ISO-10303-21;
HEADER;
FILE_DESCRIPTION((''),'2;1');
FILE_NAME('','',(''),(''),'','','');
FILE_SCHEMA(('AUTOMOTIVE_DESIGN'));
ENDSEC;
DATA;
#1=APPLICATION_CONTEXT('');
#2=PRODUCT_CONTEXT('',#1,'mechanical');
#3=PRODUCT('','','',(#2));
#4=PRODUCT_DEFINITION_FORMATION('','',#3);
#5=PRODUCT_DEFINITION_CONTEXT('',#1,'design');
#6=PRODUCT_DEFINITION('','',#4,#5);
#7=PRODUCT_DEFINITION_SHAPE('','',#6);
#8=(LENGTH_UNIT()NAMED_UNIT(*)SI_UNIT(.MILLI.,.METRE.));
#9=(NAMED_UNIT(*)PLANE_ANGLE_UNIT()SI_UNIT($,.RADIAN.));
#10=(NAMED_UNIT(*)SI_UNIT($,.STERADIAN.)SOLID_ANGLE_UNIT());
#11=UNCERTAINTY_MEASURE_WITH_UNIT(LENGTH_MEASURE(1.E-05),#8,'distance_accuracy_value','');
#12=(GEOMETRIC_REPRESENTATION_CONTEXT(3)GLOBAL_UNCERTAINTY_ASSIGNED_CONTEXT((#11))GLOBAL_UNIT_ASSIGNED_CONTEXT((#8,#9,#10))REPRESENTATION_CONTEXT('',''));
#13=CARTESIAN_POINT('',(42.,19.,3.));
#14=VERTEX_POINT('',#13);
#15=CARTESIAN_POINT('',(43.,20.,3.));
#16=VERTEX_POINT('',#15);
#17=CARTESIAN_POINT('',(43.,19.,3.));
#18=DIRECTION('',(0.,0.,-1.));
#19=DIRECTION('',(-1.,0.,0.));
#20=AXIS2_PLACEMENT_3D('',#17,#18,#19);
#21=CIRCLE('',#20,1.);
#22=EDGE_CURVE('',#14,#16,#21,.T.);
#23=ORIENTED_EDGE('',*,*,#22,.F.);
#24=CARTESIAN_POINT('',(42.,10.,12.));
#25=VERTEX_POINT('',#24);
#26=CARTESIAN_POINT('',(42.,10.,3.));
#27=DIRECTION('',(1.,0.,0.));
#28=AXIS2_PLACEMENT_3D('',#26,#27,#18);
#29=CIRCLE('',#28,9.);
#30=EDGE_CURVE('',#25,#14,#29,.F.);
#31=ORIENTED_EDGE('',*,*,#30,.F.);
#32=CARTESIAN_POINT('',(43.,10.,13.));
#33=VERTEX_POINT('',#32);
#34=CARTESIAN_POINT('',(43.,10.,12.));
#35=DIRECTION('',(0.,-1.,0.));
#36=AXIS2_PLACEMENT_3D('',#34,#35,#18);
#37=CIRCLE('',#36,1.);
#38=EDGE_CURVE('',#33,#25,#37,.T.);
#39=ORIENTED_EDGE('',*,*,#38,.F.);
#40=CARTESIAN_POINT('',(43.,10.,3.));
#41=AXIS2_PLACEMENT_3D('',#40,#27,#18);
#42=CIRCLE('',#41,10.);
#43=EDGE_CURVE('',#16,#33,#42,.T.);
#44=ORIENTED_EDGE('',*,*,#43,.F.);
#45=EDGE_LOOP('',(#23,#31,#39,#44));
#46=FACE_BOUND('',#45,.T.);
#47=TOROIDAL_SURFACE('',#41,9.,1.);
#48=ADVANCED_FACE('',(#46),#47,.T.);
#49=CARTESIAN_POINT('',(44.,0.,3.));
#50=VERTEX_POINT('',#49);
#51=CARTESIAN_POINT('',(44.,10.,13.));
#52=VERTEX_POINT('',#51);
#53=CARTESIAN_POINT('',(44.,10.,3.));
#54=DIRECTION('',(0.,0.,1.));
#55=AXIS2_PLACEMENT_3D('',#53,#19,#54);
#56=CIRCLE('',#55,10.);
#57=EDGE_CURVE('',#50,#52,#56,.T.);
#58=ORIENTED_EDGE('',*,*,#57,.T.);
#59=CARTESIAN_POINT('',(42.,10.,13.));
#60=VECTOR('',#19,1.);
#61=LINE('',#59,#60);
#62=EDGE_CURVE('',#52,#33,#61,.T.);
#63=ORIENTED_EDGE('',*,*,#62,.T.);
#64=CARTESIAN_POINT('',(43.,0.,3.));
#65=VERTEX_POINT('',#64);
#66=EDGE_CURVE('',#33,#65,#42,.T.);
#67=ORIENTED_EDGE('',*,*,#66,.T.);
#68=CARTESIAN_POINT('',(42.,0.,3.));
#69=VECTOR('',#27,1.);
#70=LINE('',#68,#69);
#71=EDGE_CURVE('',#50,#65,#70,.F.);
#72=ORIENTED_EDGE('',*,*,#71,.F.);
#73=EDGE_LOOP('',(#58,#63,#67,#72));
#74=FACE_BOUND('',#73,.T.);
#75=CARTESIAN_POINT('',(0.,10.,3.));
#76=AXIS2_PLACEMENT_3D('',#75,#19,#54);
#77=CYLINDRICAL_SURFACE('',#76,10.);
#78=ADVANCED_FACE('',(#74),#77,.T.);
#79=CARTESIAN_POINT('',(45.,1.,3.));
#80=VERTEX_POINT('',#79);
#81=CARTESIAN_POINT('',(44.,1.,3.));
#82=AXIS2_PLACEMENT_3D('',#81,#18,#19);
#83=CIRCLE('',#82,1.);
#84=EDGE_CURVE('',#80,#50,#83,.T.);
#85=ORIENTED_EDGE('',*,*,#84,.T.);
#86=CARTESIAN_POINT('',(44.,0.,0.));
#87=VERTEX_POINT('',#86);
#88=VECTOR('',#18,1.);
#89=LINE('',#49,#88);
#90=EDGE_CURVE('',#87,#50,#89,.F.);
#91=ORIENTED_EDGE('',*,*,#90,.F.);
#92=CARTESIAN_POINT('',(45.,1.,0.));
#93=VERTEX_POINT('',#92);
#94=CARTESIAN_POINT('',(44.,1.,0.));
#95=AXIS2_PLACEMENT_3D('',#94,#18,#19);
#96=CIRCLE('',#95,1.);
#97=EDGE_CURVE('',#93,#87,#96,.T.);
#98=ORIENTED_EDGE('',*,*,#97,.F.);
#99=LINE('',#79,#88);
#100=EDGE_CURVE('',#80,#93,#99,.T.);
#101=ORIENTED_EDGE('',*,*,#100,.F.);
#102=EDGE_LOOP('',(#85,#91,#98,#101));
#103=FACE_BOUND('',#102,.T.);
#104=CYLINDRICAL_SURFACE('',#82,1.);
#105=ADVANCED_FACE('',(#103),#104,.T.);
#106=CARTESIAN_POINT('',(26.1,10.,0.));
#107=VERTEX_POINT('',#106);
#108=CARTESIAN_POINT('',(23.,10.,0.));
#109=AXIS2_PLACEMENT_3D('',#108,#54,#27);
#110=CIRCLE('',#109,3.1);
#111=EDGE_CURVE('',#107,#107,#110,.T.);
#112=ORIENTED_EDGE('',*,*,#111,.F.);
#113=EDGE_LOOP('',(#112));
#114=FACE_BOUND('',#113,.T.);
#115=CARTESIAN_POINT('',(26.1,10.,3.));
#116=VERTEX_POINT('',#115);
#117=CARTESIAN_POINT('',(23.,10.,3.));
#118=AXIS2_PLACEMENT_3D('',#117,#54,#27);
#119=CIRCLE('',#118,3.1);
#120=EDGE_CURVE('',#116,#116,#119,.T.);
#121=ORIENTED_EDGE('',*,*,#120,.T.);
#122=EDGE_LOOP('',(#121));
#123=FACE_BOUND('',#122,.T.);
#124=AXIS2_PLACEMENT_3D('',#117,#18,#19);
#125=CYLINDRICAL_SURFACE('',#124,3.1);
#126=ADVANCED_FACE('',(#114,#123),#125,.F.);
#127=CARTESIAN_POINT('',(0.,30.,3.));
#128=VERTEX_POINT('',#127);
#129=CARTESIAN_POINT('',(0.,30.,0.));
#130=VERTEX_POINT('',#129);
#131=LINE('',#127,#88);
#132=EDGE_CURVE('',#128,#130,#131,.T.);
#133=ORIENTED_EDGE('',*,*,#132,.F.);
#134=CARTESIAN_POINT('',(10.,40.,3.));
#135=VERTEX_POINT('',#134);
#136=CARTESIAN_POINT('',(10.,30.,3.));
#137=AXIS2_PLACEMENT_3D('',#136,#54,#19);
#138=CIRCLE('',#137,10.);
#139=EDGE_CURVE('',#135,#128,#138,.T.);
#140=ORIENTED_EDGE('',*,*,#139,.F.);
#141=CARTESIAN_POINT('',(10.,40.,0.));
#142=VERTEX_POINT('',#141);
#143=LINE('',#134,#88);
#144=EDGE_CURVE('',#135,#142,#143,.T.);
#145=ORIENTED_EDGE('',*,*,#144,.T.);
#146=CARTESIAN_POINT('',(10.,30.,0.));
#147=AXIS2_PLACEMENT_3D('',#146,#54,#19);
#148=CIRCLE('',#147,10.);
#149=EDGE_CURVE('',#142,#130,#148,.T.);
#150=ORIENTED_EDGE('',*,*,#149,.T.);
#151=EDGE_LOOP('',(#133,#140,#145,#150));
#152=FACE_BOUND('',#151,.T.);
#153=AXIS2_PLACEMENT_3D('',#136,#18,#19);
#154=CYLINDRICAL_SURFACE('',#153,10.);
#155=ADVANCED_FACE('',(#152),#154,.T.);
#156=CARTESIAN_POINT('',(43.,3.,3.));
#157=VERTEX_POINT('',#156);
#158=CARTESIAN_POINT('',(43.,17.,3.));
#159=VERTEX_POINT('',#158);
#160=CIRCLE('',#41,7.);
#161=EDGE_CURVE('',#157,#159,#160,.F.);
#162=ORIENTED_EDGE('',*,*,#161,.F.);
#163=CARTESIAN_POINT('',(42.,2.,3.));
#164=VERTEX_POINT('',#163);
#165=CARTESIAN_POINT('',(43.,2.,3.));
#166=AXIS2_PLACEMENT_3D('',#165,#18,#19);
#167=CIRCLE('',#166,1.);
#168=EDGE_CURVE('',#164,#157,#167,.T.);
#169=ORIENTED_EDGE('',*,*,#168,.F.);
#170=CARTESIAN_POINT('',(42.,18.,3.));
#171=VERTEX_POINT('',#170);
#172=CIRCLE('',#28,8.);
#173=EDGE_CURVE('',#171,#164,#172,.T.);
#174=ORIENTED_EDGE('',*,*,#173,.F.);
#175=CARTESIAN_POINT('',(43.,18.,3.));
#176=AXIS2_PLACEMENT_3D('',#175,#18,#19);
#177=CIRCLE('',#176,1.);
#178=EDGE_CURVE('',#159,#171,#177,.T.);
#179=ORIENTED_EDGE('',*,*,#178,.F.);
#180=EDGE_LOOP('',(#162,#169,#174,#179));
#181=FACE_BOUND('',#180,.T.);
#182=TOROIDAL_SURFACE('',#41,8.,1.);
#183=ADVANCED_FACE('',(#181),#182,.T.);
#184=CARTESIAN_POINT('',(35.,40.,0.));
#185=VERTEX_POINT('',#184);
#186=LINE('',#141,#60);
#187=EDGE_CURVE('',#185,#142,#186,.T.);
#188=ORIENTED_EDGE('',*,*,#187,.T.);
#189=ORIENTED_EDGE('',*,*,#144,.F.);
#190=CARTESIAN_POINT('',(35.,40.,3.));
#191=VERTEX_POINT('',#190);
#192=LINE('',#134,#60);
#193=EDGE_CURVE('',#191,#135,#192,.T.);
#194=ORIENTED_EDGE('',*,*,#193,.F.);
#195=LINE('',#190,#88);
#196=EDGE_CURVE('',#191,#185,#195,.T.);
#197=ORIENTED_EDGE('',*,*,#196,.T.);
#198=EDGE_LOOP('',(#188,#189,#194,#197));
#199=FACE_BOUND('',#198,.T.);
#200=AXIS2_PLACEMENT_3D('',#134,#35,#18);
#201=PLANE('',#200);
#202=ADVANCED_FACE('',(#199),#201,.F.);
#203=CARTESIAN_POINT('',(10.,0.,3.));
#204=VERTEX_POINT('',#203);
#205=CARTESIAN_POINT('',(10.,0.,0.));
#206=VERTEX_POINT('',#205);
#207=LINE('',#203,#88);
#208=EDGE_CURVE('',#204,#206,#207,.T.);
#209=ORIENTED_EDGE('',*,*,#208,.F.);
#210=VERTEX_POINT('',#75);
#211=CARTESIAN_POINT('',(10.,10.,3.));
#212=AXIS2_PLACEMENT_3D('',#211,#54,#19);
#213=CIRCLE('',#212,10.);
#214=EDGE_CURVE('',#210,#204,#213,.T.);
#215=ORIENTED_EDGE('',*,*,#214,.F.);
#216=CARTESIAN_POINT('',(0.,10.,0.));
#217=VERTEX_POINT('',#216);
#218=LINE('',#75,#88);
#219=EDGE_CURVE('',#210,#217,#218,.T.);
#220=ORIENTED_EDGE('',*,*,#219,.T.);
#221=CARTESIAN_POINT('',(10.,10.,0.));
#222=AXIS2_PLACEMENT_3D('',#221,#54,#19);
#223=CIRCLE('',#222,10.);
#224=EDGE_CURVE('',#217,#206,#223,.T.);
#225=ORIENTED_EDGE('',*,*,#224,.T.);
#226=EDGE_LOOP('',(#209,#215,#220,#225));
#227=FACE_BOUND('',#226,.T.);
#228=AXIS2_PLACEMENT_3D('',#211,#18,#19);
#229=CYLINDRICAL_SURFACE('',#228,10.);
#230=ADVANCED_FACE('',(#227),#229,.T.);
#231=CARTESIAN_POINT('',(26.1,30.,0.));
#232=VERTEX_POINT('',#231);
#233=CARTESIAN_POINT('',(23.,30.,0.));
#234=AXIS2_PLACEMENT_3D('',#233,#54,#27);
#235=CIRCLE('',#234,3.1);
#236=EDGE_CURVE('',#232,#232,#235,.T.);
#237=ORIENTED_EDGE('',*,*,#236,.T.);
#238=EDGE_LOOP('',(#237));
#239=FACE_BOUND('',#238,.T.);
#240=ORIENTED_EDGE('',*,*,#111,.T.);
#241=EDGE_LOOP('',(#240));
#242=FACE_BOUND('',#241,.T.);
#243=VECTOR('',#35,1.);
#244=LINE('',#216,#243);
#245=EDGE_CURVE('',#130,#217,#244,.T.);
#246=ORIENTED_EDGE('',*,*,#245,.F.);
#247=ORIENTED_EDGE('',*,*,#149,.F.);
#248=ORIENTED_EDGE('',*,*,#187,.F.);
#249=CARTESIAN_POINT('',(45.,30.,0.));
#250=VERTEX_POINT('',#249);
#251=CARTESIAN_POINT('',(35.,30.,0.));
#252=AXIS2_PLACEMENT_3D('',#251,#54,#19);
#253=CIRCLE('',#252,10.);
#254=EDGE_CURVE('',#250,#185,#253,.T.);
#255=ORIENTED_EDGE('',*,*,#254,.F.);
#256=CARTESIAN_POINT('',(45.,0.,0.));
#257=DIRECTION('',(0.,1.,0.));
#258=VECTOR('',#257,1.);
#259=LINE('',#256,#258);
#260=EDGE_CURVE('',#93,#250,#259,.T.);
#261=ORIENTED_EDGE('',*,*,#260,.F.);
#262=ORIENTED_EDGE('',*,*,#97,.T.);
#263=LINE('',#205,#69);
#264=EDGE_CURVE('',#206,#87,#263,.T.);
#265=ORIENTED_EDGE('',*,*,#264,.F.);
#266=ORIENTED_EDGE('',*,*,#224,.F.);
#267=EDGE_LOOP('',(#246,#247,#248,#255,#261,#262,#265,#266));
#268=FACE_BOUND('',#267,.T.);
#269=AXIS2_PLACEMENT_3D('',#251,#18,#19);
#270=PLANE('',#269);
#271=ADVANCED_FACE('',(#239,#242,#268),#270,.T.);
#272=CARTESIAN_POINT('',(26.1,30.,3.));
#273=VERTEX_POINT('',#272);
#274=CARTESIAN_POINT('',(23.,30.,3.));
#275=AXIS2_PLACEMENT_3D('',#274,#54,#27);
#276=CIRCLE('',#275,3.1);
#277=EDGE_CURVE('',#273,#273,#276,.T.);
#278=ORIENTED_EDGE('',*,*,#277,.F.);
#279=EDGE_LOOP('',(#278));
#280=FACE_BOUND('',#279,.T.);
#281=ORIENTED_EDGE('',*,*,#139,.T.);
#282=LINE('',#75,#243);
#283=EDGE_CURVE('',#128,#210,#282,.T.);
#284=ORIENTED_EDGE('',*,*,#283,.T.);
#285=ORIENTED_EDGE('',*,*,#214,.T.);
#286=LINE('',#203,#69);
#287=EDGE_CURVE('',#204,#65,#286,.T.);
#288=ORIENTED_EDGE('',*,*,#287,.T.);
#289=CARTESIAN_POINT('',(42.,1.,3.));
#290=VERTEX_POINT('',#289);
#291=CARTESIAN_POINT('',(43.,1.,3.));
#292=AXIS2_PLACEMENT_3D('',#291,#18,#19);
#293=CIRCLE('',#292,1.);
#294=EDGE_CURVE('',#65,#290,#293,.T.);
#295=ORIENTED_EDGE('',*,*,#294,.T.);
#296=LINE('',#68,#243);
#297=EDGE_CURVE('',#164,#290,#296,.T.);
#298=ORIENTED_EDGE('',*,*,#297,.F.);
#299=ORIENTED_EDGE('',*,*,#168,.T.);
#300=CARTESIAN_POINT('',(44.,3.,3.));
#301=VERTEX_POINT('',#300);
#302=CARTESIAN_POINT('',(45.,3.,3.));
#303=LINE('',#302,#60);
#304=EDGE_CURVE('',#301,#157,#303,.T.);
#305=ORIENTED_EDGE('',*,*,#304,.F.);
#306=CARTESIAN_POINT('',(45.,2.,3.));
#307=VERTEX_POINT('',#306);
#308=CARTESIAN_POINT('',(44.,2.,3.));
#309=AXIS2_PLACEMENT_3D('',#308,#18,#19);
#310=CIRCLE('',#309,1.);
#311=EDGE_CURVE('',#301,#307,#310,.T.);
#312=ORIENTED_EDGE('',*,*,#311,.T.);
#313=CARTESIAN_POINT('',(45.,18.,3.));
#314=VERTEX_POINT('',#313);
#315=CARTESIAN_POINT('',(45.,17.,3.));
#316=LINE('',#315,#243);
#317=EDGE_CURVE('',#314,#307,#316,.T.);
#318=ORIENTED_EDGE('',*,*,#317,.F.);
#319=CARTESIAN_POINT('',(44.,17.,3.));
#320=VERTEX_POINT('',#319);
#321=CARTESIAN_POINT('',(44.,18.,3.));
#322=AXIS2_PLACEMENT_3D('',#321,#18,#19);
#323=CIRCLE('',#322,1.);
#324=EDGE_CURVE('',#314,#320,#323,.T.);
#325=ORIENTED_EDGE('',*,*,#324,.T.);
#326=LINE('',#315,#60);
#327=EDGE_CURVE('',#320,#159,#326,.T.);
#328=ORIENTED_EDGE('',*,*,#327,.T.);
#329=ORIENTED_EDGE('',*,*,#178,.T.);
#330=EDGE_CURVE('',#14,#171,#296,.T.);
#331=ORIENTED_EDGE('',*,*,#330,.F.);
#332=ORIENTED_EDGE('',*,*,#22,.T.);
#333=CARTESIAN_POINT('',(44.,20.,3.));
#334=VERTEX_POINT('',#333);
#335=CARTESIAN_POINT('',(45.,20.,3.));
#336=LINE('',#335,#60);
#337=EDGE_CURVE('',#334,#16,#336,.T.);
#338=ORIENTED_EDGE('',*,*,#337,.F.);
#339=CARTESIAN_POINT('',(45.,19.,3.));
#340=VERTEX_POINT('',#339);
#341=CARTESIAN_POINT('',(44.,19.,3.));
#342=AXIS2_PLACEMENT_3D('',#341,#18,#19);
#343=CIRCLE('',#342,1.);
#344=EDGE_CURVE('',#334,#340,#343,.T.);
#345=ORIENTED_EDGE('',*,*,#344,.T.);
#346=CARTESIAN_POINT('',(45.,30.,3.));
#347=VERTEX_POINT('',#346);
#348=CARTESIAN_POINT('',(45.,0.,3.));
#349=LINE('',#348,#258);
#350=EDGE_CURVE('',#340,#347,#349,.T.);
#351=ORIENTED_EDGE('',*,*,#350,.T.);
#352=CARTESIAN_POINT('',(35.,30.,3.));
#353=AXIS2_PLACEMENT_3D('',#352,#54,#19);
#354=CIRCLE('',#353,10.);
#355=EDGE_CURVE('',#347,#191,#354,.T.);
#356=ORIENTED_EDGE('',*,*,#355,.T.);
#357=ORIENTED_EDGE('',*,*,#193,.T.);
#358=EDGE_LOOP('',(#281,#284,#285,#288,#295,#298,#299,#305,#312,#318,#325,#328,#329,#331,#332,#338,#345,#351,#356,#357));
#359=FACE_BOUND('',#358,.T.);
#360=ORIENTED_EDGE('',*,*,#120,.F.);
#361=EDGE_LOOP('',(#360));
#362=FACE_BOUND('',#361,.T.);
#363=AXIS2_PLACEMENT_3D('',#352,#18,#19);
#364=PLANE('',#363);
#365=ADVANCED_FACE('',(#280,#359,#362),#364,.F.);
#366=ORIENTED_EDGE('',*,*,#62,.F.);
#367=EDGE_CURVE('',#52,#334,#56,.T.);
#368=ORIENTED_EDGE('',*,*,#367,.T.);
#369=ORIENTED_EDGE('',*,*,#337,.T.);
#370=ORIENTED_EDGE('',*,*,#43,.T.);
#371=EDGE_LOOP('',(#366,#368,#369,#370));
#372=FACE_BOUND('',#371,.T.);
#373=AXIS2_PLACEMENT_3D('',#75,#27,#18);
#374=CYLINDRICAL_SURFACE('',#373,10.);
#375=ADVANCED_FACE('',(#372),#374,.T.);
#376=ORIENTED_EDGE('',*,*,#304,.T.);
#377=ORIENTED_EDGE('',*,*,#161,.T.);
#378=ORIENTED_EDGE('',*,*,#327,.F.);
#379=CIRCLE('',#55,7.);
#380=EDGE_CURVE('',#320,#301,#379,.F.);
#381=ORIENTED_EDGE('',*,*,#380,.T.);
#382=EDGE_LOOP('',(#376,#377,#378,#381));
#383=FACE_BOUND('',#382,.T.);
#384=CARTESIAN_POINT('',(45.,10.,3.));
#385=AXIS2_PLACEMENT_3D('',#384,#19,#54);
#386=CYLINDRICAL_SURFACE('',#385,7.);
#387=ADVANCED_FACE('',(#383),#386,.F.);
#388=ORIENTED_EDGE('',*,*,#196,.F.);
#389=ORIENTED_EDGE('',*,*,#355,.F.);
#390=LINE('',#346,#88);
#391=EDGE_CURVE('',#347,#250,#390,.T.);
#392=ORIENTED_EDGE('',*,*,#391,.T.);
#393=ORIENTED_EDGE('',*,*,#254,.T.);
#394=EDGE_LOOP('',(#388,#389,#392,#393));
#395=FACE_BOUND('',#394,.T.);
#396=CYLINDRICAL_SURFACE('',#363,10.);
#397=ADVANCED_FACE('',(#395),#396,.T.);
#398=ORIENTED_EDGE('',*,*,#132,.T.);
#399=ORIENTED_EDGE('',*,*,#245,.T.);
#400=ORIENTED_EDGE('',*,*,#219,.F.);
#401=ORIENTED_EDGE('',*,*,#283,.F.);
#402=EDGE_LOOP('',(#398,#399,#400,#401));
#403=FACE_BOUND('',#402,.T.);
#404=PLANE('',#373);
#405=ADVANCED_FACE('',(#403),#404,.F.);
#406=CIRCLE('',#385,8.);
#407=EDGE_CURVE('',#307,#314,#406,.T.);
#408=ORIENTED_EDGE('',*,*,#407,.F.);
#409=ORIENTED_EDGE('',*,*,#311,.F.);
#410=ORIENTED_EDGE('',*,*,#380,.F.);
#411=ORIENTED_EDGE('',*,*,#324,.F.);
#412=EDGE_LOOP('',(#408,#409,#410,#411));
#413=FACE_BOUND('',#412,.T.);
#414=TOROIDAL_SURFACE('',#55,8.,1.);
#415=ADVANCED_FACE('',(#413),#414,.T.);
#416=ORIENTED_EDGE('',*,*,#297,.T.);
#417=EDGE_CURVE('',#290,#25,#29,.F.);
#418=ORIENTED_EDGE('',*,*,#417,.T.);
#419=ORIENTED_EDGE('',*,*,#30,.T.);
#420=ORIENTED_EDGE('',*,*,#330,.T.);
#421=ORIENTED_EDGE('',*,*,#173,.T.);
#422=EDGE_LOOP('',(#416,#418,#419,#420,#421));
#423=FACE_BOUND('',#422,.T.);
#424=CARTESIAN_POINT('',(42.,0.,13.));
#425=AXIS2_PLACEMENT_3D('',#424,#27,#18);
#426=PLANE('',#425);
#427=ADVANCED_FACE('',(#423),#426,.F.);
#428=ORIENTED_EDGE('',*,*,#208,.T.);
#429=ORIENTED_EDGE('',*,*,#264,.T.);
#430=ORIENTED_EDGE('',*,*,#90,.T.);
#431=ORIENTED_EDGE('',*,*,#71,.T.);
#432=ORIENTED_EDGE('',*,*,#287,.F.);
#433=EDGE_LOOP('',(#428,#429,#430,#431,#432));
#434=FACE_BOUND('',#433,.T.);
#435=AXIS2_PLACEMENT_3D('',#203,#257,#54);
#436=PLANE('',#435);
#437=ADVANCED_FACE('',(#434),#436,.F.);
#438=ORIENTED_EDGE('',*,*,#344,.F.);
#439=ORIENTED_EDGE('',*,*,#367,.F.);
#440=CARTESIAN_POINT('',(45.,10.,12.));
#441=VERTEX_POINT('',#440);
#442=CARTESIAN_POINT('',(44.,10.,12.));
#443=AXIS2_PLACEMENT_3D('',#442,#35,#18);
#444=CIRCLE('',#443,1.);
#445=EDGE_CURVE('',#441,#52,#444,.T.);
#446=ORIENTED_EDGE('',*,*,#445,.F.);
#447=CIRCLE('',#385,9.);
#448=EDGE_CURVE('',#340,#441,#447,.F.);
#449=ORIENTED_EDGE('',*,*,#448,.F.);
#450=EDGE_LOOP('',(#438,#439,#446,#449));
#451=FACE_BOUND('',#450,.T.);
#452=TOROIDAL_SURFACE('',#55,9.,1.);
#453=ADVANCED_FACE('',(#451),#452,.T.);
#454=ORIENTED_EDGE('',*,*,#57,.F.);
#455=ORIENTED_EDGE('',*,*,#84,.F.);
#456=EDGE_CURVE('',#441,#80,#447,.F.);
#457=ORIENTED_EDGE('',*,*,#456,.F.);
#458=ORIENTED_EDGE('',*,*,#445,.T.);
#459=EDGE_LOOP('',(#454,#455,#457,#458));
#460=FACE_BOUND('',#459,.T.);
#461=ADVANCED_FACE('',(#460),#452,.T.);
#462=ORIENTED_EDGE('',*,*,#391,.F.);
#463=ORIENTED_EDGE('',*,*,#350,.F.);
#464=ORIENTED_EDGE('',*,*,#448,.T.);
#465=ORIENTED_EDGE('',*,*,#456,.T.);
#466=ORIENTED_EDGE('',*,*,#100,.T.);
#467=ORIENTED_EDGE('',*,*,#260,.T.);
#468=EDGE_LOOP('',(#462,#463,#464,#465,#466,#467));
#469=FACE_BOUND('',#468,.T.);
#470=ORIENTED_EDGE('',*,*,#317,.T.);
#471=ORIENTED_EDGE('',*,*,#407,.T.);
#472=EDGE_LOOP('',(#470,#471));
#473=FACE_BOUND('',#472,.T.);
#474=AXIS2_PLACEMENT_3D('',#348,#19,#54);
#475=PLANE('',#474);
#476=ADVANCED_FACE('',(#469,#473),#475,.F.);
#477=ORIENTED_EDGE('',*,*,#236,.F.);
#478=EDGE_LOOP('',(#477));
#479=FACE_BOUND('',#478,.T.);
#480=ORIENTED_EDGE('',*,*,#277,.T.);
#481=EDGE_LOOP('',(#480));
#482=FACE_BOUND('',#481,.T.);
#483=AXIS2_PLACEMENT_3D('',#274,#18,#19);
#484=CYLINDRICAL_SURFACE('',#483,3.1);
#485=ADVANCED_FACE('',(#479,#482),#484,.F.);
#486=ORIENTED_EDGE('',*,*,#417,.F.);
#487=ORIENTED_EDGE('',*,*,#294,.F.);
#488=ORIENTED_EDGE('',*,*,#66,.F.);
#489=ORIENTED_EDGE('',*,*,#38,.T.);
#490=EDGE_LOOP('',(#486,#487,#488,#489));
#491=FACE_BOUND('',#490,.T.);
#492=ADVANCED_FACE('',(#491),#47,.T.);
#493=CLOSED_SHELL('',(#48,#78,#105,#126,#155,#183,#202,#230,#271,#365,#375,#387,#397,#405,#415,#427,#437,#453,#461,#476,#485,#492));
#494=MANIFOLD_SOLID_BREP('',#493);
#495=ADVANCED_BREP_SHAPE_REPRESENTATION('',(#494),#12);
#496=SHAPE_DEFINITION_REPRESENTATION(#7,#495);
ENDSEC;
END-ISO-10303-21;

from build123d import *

# Parameters (mm, degrees)
SKETCH1_R           = 3.1
BOSS_EXTRUDE1_DEPTH = 3
SKETCH2_W           = 3
SKETCH2_H           = 20
BOSS_EXTRUDE2_DEPTH = 10
FILLET1_R           = 10
CUT_EXTRUDE1_DEPTH  = 60.439044407
FILLET2_R           = 1


with BuildPart() as part:
    # Sketch1 → Boss-Extrude1 (new body)
    with BuildSketch(Plane.XY):
        with BuildLine():
            Line((10, 0), (45, 0))
            Line((45, 0), (45, 30))
            ThreePointArc((45, 30), (42.071067812, 37.071067812), (35, 40))
            Line((35, 40), (10, 40))
            ThreePointArc((10, 40), (2.928932188, 37.071067812), (0, 30))
            Line((0, 30), (0, 10))
            ThreePointArc((0, 10), (2.928932188, 2.928932188), (10, 0))
        make_face()
        with Locations((23, 30)):
            Circle(SKETCH1_R, mode=Mode.SUBTRACT)
        with Locations((23, 10)):
            Circle(SKETCH1_R, mode=Mode.SUBTRACT)
    extrude(amount=BOSS_EXTRUDE1_DEPTH)

    # Sketch2 → Boss-Extrude2 (add)
    with BuildSketch(Plane.XY.offset(3)):
        with Locations((43.5, 10)):
            Rectangle(SKETCH2_W, SKETCH2_H)
    extrude(amount=BOSS_EXTRUDE2_DEPTH)

    # Fillet1
    fillet1_edges = [part.edges().sort_by_distance(p)[0] for p in [
        (43.5, 0, 13),
        (43.5, 20, 13),
    ]]
    fillet(fillet1_edges, radius=FILLET1_R - 0.0001)  # a hair under: the kernel refuses the full size

    # Sketch3 → Cut-Extrude1 (cut, through all)
    with BuildSketch(Plane.ZY.offset(-42)):
        with BuildLine():
            Line((3, 17), (3, 3))
            ThreePointArc((3, 3), (10, 10), (3, 17))
        make_face()
    extrude(amount=-CUT_EXTRUDE1_DEPTH, mode=Mode.SUBTRACT)

    # Fillet2
    fillet2_edges = [part.edges().sort_by_distance(p)[0] for p in [
        (45, 0, 1.50005),
        (45, 17.071097101, 10.071097101),
        (45, 2.928902899, 10.071097101),
        (42, 17.071097101, 10.071097101),
        (42, 2.928902899, 10.071097101),
        (45, 10, 10),
        (42, 10, 10),
    ]]
    fillet(fillet2_edges, radius=FILLET2_R)


solid = part.part
